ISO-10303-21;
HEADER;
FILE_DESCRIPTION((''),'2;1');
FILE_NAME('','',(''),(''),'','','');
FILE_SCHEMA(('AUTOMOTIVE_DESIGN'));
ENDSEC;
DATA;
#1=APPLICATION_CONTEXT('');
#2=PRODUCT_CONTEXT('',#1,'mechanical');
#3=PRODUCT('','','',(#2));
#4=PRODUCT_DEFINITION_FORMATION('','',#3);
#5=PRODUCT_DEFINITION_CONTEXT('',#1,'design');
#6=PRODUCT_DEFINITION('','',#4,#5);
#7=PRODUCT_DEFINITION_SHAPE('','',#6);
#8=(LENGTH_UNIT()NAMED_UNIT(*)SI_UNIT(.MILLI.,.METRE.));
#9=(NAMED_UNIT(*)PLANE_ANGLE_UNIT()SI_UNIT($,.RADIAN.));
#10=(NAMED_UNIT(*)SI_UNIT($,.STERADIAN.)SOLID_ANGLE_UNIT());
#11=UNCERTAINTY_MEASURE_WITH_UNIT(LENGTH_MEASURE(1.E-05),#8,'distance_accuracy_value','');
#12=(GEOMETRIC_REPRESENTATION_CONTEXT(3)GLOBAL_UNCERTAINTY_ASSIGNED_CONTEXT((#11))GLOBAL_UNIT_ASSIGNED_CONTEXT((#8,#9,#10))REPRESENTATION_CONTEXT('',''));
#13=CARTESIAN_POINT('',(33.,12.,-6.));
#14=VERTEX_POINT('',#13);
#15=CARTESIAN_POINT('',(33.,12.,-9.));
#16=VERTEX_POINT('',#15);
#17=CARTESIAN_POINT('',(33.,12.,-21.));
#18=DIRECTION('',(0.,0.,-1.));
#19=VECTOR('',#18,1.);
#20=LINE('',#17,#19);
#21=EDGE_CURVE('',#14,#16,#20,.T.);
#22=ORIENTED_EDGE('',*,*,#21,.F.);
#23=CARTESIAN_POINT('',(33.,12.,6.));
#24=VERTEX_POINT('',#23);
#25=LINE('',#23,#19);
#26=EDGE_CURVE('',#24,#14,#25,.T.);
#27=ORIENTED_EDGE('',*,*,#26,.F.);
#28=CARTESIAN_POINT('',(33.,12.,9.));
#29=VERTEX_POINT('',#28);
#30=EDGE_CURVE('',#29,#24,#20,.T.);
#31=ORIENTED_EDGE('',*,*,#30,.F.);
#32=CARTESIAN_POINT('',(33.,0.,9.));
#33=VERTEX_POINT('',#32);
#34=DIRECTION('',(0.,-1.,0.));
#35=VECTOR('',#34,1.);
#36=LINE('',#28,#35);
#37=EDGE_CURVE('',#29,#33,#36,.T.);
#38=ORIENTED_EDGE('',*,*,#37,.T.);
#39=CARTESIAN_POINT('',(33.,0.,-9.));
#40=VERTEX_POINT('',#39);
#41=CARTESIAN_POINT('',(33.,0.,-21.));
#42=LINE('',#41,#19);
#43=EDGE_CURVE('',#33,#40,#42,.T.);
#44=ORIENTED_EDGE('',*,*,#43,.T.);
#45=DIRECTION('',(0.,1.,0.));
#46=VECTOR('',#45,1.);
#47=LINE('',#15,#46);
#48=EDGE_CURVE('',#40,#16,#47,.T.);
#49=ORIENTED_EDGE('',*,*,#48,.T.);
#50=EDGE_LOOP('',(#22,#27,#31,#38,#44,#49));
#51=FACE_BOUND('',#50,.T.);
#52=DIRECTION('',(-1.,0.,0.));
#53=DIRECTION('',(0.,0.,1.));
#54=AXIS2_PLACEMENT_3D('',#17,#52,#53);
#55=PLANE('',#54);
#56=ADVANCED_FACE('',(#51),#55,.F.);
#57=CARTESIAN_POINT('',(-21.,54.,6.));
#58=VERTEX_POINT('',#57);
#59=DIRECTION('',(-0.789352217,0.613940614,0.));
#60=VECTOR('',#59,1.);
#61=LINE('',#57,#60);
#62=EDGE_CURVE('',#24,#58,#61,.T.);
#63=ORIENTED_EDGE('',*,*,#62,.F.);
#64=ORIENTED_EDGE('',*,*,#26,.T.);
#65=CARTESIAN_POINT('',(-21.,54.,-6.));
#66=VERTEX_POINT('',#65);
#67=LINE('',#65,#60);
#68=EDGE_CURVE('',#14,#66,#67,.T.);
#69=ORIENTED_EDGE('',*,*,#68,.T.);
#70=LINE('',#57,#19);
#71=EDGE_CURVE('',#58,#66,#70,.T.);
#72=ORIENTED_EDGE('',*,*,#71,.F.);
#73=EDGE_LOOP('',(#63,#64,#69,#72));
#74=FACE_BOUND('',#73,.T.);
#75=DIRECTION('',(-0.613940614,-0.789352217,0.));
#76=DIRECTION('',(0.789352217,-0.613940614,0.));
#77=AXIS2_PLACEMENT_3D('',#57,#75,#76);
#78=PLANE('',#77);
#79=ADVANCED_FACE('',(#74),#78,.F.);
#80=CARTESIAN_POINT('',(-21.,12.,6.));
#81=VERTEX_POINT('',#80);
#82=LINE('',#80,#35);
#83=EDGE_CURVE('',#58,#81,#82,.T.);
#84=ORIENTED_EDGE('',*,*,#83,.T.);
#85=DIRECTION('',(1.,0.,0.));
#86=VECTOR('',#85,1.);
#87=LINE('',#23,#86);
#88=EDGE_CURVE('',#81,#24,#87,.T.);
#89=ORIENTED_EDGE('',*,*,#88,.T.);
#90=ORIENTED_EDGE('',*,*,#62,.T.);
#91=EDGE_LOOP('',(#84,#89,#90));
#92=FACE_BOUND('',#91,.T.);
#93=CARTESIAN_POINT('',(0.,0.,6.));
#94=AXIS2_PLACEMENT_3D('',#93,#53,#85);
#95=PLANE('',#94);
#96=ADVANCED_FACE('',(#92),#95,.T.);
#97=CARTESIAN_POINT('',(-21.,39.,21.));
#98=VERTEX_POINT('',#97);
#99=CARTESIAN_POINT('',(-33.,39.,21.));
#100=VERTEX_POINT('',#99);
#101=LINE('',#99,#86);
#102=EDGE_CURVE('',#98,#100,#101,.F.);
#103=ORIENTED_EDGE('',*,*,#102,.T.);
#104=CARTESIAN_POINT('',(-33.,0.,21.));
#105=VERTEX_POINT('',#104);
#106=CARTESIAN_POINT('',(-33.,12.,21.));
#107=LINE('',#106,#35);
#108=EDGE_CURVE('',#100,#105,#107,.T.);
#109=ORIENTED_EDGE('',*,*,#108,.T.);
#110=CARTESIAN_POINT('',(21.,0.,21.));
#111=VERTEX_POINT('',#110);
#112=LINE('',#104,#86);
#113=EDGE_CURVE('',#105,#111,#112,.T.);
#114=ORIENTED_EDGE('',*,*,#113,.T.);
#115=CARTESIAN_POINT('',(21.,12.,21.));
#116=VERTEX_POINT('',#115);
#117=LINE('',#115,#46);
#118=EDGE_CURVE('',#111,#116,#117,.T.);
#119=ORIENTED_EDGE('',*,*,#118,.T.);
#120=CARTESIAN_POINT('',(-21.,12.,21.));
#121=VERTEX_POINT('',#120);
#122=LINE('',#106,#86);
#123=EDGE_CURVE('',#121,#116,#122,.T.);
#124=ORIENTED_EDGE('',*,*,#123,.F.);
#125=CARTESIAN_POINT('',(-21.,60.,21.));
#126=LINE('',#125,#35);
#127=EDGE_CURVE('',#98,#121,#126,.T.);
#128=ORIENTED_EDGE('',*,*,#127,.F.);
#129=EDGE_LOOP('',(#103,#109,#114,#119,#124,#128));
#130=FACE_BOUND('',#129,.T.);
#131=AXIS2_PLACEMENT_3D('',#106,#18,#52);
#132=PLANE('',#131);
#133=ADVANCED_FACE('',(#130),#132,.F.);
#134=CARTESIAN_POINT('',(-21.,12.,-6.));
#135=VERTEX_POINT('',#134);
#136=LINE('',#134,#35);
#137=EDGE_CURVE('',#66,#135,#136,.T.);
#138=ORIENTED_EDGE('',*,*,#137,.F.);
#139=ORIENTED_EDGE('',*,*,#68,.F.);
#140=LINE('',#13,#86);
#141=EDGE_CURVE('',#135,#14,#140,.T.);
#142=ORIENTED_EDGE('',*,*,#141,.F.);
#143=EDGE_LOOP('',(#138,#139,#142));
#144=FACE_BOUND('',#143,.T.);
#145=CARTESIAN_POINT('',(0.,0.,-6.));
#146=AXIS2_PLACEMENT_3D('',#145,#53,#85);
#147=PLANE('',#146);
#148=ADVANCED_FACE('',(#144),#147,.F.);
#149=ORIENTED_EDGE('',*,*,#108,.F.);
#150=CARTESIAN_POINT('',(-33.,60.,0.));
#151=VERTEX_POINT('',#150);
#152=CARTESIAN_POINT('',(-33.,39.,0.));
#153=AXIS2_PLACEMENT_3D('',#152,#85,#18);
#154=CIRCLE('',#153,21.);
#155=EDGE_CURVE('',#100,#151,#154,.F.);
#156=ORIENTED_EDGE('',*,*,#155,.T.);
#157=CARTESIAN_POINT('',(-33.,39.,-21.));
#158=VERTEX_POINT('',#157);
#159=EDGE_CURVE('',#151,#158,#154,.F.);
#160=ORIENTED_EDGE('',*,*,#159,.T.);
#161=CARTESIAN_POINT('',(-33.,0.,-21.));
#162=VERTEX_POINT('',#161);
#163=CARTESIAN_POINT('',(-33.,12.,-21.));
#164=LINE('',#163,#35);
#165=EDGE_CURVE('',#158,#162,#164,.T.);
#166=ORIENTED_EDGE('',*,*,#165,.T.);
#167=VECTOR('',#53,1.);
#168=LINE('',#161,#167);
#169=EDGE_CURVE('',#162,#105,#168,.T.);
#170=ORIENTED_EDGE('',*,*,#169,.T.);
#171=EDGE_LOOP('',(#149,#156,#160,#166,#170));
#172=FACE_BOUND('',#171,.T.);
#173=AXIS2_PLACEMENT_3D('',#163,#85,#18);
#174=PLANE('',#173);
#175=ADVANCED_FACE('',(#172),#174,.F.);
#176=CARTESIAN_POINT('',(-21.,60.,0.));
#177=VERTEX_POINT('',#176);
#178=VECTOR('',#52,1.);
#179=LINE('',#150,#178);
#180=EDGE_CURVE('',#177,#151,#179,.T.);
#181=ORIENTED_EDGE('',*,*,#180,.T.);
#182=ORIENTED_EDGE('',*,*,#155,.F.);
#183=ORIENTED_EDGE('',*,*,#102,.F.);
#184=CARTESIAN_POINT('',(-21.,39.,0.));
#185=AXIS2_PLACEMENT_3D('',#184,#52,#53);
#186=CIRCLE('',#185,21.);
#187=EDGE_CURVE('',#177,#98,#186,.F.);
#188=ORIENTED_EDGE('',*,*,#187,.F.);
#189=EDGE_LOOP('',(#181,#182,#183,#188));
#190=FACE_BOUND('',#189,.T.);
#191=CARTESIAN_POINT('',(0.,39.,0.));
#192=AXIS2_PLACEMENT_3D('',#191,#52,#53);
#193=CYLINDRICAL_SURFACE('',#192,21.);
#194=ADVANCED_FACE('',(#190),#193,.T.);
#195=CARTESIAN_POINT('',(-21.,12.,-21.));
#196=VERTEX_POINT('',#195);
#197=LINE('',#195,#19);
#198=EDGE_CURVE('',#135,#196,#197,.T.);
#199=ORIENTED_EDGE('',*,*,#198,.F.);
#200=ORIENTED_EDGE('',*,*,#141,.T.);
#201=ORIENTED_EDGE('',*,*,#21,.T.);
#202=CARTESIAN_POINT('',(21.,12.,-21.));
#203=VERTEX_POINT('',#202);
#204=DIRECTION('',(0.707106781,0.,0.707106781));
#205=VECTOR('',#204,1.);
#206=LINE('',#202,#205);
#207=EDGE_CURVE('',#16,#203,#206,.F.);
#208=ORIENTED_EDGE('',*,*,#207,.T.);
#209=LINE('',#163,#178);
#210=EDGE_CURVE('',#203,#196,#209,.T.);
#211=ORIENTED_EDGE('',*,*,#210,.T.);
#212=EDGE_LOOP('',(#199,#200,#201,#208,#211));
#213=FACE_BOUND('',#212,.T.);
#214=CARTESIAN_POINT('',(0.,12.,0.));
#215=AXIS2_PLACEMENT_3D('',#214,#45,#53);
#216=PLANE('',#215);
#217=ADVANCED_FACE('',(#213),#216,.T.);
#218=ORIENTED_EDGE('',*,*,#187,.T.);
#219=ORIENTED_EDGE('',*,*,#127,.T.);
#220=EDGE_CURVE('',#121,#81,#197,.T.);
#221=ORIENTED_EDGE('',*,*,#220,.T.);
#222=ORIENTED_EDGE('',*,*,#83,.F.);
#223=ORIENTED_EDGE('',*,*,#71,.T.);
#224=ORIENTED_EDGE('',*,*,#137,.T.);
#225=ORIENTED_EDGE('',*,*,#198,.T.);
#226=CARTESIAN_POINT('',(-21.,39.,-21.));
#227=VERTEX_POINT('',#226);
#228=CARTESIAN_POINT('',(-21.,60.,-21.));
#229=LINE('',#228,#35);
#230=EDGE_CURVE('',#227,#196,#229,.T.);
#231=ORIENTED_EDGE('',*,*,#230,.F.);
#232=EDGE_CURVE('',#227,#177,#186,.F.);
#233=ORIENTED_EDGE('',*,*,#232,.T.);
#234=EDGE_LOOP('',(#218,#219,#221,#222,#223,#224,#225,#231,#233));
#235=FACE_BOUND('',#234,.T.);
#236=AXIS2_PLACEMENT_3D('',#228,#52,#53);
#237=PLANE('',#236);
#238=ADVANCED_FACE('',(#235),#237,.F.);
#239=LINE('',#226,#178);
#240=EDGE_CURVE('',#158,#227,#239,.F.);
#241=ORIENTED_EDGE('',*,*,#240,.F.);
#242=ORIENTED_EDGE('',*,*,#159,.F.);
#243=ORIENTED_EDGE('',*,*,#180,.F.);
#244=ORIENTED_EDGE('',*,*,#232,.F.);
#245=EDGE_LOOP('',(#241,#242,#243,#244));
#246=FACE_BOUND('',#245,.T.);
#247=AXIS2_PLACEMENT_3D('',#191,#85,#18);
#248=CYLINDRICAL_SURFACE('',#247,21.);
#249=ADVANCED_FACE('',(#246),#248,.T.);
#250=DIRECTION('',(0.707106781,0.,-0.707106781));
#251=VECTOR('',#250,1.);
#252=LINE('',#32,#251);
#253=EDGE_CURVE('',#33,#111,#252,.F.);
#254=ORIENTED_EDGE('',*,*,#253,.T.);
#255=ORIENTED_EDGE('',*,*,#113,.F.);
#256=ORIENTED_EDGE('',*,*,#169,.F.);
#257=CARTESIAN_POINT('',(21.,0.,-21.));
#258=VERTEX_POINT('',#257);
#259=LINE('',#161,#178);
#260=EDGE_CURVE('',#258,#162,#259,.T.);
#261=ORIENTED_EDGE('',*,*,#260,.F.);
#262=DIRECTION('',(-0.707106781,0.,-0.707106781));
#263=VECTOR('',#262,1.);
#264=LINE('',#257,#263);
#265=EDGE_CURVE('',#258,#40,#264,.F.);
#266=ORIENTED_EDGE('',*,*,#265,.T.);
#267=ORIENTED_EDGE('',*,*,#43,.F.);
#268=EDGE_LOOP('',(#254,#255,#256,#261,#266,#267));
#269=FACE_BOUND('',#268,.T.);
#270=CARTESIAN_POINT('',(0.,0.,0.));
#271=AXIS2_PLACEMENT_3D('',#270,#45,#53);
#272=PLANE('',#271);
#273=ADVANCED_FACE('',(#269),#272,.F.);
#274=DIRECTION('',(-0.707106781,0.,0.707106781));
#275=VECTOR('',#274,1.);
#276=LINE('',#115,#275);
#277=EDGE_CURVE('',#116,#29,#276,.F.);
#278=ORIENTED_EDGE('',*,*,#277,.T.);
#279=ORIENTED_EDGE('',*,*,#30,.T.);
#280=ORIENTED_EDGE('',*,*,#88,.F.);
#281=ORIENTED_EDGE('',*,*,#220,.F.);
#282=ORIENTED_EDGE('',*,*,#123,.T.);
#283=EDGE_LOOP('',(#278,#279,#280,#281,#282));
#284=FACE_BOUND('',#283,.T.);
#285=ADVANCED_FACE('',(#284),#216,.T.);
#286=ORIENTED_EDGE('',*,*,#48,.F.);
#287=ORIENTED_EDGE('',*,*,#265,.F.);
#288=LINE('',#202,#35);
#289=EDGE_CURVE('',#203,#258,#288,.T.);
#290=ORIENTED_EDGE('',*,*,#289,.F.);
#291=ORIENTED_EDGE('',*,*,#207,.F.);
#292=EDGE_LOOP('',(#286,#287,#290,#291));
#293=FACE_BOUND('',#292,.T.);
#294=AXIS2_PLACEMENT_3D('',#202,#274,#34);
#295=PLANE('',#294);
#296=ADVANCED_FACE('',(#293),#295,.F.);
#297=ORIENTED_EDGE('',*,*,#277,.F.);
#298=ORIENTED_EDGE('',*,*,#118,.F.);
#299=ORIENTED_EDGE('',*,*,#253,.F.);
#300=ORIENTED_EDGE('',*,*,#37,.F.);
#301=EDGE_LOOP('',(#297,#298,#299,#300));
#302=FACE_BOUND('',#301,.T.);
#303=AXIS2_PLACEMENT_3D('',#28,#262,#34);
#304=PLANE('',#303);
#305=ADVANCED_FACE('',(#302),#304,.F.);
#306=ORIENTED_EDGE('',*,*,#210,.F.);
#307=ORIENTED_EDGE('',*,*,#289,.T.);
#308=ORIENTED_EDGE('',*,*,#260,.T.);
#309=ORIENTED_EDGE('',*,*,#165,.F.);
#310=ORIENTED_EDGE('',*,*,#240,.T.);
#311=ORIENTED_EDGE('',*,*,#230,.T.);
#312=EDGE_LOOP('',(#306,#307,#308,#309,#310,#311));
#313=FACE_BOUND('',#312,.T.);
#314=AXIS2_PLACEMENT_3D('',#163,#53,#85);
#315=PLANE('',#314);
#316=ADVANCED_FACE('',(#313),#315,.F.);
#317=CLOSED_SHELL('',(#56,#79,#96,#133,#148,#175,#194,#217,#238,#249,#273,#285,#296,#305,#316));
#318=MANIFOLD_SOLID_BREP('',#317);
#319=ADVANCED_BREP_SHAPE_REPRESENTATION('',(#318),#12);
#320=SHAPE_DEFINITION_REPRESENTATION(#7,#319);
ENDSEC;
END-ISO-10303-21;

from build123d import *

# Parameters (mm, degrees)
SKETCH3_W           = 66
SKETCH3_H           = 42
BOSS_EXTRUDE1_DEPTH = 12
CHAMFER1_SIZE       = 12
SKETCH4_W           = 12
SKETCH4_H           = 42
BOSS_EXTRUDE2_DEPTH = 48
FILLET1_R           = 21
BOSS_EXTRUDE5_DEPTH = 6


with BuildPart() as part:
    # Sketch3 → Boss-Extrude1 (new body)
    with BuildSketch(Plane(origin=(0, 0, 0), x_dir=(1, 0, 0), z_dir=(0, 1, 0))):
        Rectangle(SKETCH3_W, SKETCH3_H)
    extrude(amount=BOSS_EXTRUDE1_DEPTH)

    # Chamfer1
    chamfer1_edges = [part.edges().sort_by_distance(p)[0] for p in [
        (33, 6, 21),
        (33, 6, -21),
    ]]
    chamfer(chamfer1_edges, length=CHAMFER1_SIZE)

    # Sketch4 → Boss-Extrude2 (add)
    with BuildSketch(Plane(origin=(0, 12, 0), x_dir=(1, 0, 0), z_dir=(0, 1, 0))):
        with Locations((-27, 0)):
            Rectangle(SKETCH4_W, SKETCH4_H)
    extrude(amount=BOSS_EXTRUDE2_DEPTH)

    # Fillet1
    fillet1_edges = [part.edges().sort_by_distance(p)[0] for p in [
        (-27, 60, 21),
        (-27, 60, -21),
    ]]
    fillet(fillet1_edges, radius=FILLET1_R - 0.0001)  # a hair under: the kernel refuses the full size

    # Sketch6 → Boss-Extrude5 (add, symmetric)
    with BuildSketch(Plane.XY):
        Polygon((-21, 54), (33, 12), (-21, 12), align=None)
    extrude(amount=BOSS_EXTRUDE5_DEPTH, both=True)


solid = part.part
